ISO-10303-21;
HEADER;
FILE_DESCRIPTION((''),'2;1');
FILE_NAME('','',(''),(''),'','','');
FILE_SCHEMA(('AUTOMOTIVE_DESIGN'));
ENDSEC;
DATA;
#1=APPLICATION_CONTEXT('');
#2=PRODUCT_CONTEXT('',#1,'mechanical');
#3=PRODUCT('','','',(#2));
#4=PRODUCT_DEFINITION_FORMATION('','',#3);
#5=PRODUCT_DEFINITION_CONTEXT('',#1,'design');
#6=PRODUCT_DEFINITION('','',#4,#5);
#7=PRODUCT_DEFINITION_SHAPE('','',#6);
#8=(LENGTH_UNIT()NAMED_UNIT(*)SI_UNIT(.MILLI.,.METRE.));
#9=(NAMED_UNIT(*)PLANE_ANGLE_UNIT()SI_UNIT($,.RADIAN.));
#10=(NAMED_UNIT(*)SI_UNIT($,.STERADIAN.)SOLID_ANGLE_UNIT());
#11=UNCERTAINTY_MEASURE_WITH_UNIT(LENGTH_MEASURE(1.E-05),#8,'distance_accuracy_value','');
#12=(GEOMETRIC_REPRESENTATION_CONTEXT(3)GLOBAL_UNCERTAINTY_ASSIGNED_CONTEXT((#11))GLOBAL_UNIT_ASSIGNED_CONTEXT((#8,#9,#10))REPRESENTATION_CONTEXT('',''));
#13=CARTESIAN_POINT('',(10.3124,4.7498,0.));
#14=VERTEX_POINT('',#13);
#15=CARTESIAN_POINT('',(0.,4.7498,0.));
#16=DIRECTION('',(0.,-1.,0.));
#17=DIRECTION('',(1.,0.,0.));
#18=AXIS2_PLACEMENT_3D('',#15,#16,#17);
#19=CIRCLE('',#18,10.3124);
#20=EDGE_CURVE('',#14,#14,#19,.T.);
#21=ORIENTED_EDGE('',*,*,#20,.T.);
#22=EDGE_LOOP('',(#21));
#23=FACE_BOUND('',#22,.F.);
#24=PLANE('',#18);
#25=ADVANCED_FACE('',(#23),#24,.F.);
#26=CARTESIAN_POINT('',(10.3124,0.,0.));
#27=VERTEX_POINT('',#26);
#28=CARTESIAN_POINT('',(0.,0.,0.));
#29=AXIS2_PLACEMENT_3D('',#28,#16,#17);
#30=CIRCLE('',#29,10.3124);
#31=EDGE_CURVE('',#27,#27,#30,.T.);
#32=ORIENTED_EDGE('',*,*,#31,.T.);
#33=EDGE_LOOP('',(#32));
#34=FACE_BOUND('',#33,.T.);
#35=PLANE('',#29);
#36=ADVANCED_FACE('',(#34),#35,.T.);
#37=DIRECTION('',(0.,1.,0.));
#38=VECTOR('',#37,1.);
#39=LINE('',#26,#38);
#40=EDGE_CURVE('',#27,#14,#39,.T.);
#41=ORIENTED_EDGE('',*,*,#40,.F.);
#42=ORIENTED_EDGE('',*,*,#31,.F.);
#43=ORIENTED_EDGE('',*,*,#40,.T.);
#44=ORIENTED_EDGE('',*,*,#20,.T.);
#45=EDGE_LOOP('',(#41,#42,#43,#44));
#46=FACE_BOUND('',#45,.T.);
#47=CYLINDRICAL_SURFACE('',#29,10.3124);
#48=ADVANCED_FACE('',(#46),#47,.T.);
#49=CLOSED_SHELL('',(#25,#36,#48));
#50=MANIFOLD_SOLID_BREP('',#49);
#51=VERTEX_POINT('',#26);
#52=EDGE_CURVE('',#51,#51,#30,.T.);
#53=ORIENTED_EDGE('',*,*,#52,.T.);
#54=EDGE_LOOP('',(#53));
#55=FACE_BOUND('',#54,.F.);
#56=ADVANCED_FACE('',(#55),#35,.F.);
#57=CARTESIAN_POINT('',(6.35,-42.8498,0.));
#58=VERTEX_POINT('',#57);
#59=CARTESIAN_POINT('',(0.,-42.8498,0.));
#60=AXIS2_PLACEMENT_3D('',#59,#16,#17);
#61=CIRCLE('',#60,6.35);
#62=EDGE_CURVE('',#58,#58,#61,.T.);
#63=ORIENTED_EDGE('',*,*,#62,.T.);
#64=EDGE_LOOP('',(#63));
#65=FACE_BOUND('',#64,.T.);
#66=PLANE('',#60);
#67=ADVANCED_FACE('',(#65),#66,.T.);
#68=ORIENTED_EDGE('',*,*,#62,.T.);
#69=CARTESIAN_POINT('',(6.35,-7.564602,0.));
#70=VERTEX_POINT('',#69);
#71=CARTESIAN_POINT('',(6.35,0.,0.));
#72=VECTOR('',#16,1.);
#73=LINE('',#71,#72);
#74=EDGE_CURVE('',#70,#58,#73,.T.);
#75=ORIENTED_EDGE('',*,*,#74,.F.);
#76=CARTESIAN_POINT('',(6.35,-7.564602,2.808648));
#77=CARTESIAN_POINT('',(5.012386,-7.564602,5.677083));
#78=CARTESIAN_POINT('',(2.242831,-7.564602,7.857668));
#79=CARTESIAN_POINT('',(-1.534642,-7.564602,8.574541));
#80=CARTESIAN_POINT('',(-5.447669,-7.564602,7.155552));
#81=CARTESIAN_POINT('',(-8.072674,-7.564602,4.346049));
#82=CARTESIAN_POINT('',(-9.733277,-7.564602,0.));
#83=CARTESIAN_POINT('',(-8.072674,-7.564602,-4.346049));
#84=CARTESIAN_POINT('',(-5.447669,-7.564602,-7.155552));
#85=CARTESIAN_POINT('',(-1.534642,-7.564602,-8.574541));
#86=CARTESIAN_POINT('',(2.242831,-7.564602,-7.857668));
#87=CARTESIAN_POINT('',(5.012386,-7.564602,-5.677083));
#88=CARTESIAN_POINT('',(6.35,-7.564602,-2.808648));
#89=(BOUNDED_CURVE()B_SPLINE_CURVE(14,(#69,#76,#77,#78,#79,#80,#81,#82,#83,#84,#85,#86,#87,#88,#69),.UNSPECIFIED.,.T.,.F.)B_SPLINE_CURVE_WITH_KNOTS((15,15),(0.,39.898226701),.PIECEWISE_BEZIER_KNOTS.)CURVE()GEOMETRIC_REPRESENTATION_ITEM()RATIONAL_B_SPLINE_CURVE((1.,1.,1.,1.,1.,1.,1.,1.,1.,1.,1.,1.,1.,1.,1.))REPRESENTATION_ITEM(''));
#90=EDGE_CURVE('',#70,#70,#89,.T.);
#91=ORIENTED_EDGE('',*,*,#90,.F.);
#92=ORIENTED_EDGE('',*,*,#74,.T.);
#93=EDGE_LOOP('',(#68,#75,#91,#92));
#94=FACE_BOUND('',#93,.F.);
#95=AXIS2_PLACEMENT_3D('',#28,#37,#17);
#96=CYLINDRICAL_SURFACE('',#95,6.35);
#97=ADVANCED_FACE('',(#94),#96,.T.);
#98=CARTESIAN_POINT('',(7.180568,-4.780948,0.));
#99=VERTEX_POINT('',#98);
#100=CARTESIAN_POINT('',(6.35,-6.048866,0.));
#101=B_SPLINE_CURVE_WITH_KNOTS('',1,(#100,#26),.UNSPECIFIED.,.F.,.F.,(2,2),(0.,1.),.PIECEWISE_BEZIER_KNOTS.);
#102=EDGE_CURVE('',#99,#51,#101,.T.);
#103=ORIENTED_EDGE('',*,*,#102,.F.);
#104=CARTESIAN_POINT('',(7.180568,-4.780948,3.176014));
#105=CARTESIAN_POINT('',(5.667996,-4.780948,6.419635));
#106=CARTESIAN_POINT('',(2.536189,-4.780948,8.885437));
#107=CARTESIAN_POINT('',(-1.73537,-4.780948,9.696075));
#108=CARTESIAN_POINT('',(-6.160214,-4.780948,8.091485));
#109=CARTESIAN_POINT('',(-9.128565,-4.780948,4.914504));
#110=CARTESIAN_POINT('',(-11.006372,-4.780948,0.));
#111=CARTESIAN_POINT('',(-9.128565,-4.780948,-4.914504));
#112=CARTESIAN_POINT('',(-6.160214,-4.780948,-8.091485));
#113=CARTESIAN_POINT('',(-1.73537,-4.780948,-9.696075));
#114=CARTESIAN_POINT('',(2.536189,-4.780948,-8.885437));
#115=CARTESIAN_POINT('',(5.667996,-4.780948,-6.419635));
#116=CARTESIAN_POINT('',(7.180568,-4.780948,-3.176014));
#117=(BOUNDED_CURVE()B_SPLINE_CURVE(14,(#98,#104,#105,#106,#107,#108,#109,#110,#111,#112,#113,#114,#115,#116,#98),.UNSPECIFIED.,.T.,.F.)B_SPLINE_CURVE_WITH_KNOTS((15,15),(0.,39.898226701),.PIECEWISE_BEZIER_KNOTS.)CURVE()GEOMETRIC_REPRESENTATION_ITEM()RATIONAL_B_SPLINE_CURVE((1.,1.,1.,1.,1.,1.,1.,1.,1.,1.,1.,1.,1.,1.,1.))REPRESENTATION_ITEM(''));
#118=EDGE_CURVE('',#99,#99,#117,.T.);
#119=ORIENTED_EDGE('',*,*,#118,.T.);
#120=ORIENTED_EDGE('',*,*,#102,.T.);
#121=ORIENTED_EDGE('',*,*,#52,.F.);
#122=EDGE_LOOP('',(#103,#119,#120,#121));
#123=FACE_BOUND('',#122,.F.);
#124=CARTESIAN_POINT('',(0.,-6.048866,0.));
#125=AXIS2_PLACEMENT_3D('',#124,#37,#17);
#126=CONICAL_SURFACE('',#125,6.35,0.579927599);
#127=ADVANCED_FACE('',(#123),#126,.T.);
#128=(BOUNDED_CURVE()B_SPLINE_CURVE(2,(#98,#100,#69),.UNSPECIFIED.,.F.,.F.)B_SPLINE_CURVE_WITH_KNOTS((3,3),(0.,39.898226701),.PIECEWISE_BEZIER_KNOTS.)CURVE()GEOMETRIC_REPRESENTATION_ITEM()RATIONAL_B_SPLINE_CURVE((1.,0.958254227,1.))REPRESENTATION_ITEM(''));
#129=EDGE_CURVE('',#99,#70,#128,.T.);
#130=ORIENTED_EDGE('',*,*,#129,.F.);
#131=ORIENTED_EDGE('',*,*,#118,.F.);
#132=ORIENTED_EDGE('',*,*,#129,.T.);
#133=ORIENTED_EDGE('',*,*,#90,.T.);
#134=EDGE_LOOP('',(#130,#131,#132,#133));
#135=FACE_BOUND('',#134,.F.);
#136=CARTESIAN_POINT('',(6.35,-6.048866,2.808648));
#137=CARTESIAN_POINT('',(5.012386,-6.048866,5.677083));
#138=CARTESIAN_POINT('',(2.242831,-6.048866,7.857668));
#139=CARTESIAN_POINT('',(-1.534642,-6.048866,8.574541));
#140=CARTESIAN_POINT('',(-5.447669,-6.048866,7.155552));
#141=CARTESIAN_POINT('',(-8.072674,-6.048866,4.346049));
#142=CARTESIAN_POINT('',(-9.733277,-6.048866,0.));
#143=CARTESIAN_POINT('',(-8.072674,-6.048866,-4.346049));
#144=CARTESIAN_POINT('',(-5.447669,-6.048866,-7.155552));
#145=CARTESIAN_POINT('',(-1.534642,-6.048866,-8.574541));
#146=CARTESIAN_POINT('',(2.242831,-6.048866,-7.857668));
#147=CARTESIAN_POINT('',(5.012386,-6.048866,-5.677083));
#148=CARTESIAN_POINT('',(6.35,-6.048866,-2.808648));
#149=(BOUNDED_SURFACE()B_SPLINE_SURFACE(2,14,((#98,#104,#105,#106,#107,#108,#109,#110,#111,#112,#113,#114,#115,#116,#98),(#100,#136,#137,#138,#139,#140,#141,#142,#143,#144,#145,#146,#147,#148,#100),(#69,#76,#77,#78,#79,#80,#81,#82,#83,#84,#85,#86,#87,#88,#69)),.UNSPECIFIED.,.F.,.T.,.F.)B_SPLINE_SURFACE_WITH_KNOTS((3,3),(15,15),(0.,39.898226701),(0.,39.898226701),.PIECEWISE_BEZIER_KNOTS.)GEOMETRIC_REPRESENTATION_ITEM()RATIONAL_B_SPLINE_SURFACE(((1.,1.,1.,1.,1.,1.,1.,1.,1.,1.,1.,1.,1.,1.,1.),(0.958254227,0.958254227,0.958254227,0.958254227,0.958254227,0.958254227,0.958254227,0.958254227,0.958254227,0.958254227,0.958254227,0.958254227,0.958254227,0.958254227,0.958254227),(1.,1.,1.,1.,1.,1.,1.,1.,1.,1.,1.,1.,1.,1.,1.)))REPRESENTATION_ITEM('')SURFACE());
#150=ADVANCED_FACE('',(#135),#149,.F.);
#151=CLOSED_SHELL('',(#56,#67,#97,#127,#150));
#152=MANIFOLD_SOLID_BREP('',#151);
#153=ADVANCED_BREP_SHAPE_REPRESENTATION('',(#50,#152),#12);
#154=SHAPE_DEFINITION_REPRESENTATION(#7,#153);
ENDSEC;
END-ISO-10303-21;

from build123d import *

# Parameters (mm, degrees)
F0_R     = 6.35
F1_DEPTH = 42.8498
F0_R_2   = 10.3124
F2_DEPTH = 4.7498
F5_R     = 6.35
F6_R     = 10.3124
F8_R     = 5.08


with BuildPart() as f1:
    # F0 (on Front) → F1 (new body)
    with BuildSketch(Plane.XZ):
        Circle(F0_R)
    extrude(amount=F1_DEPTH)

    # F5 (on plane+point) → F7 section 0
    with BuildSketch(Plane.XZ.offset(6.0488656163)):
        Circle(F5_R)
    # F6 (on Front) → F7 section 1
    with BuildSketch(Plane.XZ):
        Circle(F6_R)
    loft()

    # F8
    f8_edges = [f1.edges().sort_by_distance(p)[0] for p in [
        (-6.35, -6.048866, 0),
    ]]
    fillet(f8_edges, radius=F8_R)


with BuildPart() as f2:
    # F0 (on Front) → F2 (new body)
    with BuildSketch(Plane.XZ):
        Circle(F0_R_2)
        Circle(F0_R, mode=Mode.SUBTRACT)
        Circle(F0_R)
    extrude(amount=-F2_DEPTH)


solid = Compound([f1.part, f2.part])
